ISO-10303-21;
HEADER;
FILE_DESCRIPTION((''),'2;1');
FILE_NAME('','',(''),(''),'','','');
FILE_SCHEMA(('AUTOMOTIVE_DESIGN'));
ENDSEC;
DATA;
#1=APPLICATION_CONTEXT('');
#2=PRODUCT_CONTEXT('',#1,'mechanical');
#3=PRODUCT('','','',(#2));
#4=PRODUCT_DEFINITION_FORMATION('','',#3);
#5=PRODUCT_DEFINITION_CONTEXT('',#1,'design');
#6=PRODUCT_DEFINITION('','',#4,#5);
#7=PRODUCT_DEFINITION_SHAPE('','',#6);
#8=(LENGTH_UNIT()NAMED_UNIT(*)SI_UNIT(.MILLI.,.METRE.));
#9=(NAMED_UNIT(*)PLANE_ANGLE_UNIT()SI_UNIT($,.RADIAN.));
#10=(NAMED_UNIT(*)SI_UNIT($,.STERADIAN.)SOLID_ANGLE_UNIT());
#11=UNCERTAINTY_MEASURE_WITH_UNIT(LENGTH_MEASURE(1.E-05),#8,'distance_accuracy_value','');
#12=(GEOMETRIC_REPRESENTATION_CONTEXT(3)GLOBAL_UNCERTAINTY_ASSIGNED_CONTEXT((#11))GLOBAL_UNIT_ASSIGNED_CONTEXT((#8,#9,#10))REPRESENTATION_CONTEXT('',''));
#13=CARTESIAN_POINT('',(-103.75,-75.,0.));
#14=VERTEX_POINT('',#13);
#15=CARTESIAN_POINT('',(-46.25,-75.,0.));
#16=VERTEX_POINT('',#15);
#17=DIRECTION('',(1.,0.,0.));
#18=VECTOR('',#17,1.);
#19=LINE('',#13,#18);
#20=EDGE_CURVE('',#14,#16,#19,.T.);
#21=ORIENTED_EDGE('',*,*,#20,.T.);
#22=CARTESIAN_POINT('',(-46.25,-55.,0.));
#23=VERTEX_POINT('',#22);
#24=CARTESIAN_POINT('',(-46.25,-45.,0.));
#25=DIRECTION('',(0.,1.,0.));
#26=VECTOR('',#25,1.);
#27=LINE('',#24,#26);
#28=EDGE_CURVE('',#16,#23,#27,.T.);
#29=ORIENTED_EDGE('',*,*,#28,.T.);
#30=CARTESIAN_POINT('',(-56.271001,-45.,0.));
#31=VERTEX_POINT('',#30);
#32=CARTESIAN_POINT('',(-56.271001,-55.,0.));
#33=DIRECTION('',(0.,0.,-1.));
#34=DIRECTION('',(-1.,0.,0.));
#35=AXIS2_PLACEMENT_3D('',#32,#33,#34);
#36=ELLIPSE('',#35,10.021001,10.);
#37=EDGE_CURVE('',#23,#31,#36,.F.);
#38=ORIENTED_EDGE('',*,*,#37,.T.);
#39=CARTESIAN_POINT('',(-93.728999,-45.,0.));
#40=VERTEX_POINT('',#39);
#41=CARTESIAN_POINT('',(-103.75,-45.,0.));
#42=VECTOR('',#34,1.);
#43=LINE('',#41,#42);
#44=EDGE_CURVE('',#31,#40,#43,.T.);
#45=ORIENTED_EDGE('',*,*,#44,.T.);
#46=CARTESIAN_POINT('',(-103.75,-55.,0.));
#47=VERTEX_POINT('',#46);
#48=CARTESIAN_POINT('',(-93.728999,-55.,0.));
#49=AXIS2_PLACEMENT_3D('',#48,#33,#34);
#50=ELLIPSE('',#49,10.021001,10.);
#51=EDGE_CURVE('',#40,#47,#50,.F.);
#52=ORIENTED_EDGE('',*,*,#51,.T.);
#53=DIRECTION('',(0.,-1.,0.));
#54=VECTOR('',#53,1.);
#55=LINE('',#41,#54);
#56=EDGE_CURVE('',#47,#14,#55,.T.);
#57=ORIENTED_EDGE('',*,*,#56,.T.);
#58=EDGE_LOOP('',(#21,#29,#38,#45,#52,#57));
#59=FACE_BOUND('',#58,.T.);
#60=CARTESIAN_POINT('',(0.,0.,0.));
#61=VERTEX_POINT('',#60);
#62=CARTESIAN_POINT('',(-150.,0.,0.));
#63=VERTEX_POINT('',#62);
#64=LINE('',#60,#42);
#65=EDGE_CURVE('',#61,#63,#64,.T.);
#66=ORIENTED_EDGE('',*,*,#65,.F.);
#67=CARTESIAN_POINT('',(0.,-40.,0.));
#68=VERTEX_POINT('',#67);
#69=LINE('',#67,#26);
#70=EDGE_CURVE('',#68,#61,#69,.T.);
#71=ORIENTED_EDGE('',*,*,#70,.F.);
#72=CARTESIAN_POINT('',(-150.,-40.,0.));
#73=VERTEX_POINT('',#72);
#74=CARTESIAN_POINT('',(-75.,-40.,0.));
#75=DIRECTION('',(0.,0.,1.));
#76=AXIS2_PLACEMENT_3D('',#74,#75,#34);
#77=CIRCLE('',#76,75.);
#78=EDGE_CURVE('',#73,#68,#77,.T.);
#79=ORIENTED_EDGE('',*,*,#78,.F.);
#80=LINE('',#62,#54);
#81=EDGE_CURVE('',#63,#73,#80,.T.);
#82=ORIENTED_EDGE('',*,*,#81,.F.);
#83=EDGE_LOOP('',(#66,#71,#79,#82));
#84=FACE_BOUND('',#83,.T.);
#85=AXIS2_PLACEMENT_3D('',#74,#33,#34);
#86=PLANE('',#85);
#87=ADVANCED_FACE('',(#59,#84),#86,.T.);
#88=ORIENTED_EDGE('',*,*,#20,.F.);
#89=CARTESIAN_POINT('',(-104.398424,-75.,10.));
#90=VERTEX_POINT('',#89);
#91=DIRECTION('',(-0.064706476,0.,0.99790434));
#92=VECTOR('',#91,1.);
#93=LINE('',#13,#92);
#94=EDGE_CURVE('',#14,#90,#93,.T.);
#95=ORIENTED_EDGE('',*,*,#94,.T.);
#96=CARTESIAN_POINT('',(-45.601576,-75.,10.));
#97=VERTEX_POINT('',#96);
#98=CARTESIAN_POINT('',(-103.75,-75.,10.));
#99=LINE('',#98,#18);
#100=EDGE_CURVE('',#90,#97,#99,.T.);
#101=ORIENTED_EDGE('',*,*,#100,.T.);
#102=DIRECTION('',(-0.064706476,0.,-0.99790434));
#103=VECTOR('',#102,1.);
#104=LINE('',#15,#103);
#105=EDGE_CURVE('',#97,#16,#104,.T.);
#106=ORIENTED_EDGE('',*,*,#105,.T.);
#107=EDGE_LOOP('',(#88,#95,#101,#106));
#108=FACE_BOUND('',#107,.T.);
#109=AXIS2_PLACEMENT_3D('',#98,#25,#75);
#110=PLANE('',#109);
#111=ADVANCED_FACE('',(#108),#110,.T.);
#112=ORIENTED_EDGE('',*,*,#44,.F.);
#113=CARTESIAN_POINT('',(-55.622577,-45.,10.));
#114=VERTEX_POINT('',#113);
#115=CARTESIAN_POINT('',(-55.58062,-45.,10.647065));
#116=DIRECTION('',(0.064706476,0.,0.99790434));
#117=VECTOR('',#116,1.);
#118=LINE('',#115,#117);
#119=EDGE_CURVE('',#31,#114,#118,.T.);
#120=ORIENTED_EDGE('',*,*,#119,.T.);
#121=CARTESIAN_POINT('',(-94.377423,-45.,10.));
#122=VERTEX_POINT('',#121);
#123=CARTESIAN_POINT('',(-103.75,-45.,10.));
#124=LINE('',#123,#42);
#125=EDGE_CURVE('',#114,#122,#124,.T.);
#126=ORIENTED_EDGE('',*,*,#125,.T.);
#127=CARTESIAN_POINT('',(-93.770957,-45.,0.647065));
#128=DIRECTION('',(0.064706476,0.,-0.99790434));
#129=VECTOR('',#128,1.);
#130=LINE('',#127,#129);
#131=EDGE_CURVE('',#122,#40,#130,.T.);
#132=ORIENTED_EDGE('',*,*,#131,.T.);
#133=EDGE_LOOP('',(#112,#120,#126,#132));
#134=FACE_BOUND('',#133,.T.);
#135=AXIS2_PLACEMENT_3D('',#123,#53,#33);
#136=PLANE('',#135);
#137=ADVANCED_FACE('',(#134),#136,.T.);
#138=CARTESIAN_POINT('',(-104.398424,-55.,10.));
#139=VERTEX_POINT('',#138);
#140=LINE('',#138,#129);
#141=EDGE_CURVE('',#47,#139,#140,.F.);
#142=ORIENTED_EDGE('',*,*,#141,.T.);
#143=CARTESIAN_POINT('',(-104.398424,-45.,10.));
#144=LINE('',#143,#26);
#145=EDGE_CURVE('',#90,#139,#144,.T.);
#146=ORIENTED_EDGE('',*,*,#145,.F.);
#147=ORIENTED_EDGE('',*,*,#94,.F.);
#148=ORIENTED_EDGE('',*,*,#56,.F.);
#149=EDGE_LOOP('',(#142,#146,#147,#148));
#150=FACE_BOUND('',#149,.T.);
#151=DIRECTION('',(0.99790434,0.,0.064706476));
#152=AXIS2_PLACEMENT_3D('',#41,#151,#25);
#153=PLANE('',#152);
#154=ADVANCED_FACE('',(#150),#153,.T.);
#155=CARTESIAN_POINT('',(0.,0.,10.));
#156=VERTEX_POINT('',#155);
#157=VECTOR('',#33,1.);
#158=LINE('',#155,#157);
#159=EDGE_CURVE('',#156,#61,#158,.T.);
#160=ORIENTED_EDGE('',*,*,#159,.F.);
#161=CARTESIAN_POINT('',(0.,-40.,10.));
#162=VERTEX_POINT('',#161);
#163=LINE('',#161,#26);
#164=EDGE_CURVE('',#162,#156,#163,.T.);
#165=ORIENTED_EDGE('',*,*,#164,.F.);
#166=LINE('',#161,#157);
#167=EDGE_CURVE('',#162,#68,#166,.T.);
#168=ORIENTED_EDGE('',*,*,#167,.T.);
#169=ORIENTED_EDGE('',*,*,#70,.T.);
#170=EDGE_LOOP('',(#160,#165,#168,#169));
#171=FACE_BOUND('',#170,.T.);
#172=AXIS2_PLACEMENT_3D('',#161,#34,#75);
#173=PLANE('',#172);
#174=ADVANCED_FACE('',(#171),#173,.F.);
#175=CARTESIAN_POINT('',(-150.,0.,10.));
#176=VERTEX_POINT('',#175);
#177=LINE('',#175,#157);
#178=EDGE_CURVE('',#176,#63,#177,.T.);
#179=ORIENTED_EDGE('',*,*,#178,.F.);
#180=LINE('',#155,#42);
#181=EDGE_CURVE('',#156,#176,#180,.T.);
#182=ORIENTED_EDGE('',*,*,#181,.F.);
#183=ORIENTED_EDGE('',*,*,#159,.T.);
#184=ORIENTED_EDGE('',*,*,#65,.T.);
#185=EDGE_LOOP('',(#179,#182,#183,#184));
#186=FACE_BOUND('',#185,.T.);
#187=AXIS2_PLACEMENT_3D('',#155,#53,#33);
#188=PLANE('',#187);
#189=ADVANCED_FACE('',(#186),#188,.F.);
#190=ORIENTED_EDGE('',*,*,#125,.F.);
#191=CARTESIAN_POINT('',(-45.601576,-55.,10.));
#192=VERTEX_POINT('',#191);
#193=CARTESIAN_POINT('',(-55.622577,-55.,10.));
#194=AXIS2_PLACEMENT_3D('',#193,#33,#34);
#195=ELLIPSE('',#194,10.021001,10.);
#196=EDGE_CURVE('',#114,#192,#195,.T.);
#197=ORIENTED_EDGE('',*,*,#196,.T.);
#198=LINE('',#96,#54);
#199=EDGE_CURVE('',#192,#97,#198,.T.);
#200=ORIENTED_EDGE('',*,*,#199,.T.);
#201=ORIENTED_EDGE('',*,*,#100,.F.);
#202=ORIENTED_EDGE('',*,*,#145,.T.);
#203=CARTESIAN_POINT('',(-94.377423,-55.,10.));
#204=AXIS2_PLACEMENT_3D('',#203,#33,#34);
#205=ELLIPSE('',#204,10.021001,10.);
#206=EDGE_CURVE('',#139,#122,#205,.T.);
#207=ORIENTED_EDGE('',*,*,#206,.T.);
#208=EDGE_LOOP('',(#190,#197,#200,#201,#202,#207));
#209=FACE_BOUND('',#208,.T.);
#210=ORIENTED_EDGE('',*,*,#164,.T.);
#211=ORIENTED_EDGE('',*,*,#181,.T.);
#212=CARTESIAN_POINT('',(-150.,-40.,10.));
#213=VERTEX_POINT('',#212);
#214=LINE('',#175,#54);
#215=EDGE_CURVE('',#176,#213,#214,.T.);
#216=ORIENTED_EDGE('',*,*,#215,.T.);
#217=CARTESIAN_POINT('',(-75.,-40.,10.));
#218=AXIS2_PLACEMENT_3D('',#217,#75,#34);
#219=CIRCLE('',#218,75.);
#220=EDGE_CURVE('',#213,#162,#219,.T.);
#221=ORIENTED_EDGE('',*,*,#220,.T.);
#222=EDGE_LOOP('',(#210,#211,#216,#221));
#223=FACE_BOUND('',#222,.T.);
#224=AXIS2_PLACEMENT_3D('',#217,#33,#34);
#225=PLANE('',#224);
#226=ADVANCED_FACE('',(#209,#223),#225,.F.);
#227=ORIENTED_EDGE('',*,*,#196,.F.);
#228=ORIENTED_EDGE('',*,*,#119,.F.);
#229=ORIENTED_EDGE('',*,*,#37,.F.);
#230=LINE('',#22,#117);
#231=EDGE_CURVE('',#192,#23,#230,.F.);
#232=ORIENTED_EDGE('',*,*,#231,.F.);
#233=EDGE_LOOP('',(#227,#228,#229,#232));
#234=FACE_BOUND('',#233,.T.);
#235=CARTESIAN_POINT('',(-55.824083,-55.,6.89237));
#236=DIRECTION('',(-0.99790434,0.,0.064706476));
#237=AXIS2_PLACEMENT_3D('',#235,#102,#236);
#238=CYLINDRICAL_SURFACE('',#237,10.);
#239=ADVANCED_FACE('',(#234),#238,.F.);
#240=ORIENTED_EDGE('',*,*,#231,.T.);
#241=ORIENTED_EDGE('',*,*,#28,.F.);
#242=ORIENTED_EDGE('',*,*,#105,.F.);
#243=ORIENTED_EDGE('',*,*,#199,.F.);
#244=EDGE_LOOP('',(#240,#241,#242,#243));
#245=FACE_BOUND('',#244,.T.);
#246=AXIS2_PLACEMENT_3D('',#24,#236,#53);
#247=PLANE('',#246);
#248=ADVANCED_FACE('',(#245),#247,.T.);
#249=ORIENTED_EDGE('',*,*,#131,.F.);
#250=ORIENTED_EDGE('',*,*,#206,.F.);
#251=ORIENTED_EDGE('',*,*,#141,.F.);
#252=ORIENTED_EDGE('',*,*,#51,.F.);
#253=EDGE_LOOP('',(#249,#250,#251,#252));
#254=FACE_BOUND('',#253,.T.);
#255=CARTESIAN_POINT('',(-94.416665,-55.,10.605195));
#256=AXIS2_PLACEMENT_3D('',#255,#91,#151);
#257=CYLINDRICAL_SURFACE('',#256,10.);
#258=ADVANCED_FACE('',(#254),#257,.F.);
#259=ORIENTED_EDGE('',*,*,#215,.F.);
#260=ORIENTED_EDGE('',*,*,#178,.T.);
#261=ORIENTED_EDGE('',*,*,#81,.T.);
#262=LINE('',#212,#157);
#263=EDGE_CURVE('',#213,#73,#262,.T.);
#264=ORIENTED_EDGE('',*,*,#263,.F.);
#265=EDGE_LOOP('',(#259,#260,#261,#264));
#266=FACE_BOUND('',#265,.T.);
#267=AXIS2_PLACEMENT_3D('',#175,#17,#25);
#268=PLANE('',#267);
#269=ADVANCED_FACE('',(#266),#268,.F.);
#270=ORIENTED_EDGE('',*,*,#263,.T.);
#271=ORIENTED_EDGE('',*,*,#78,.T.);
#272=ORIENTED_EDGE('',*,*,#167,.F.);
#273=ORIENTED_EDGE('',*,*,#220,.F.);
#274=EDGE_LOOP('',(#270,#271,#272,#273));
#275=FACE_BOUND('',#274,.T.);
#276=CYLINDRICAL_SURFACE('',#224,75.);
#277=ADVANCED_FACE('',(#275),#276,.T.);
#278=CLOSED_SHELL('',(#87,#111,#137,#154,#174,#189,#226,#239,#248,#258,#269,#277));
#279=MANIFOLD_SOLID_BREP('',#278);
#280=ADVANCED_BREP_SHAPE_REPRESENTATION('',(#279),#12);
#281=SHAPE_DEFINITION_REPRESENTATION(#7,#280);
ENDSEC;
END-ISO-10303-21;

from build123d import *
from OCP.BRepFilletAPI import BRepFilletAPI_MakeChamfer

# Parameters (mm, degrees)
SKETCH1_W           = 57.5
SKETCH1_H           = 30
BOSS_EXTRUDE1_DEPTH = 10
CHAMFER1_SIZE       = 10
CHAMFER1_SIZE_2     = 0.648423639
FILLET1_R           = 10


# Some blends are built 0.0001 mm under size
with BuildPart() as part:
    # Sketch1 → Boss-Extrude1 (new body)
    with BuildSketch(Plane.XY):
        with BuildLine():
            Line((0, -40), (0, 0))
            Line((0, 0), (-150, 0))
            Line((-150, 0), (-150, -40))
            ThreePointArc((-150, -40), (-75, -115), (0, -40))
        make_face()
        with Locations((-75, -60)):
            Rectangle(SKETCH1_W, SKETCH1_H, mode=Mode.SUBTRACT)
    extrude(amount=BOSS_EXTRUDE1_DEPTH)

    # Chamfer1
    chamfer1_edges_1 = [part.edges().sort_by_distance(p)[0] for p in [
        (-46.25, -60, 10),
    ]]
    chamfer1_side_1 = [part.faces().sort_by_distance(p)[0] for p in [
        (-46.25, -60, 9.987031527),
    ]]
    chamfer1_edges_2 = [part.edges().sort_by_distance(p)[0] for p in [
        (-103.75, -60, 10),
    ]]
    chamfer1_side_2 = [part.faces().sort_by_distance(p)[0] for p in [
        (-103.75, -60, 9.987031527),
    ]]
    chamfer1 = BRepFilletAPI_MakeChamfer(part.part.solid().wrapped)
    for e in chamfer1_edges_1:
        chamfer1.Add(CHAMFER1_SIZE - 0.0001, CHAMFER1_SIZE_2 - 0.0001, e.wrapped, chamfer1_side_1[0].wrapped)
    for e in chamfer1_edges_2:
        chamfer1.Add(CHAMFER1_SIZE - 0.0001, CHAMFER1_SIZE_2 - 0.0001, e.wrapped, chamfer1_side_2[0].wrapped)
    add(Compound.cast(chamfer1.Shape()), mode=Mode.REPLACE)  # a hair under: the kernel refuses the full size

    # Fillet1
    # the kernel refuses this fillet: 10 mm, written as the material it adds along each edge
    with BuildSketch(Plane(origin=(-47.867429584, -45, -24.947523565), x_dir=(-0.9979049426006561, 0, 0.06469718334812755), z_dir=(0.06469718334812756, 0, 0.9979049426006562))) as fillet1_piece_1_section:
        with BuildLine():
            CenterArc((FILLET1_R, FILLET1_R), FILLET1_R, 180, 90)
            Line((0, FILLET1_R), (0, 0))
            Line((0, 0), (FILLET1_R, 0))
        make_face()
    fillet1_piece_1 = extrude(amount=60.020894349, mode=Mode.PRIVATE)
    fillet1_piece_1 = split(fillet1_piece_1, bisect_by=Plane(origin=(-48.707082499, -46.782935943, 10), z_dir=(0, 0, -1)), keep=Keep.TOP, mode=Mode.PRIVATE)
    fillet1_piece_1 = split(fillet1_piece_1, bisect_by=Plane(origin=(-48.707082499, -46.782935943, 0), z_dir=(0, 0, 1)), keep=Keep.TOP, mode=Mode.PRIVATE)
    add(fillet1_piece_1)
    with BuildSketch(Plane(origin=(-102.132570416, -45, -24.947523565), x_dir=(0.9979049426006561, 0, 0.06469718334812756), z_dir=(-0.06469718334812756, 0, 0.9979049426006562))) as fillet1_piece_2_section:
        with BuildLine():
            CenterArc((FILLET1_R, -FILLET1_R), FILLET1_R, 90, 90)
            Line((0, -FILLET1_R), (0, 0))
            Line((0, 0), (FILLET1_R, 0))
        make_face()
    fillet1_piece_2 = extrude(amount=60.020894349, mode=Mode.PRIVATE)
    fillet1_piece_2 = split(fillet1_piece_2, bisect_by=Plane(origin=(-101.292917501, -46.782935943, 10), z_dir=(0, 0, -1)), keep=Keep.TOP, mode=Mode.PRIVATE)
    fillet1_piece_2 = split(fillet1_piece_2, bisect_by=Plane(origin=(-101.292917501, -46.782935943, 0), z_dir=(0, 0, 1)), keep=Keep.TOP, mode=Mode.PRIVATE)
    add(fillet1_piece_2)


solid = part.part
